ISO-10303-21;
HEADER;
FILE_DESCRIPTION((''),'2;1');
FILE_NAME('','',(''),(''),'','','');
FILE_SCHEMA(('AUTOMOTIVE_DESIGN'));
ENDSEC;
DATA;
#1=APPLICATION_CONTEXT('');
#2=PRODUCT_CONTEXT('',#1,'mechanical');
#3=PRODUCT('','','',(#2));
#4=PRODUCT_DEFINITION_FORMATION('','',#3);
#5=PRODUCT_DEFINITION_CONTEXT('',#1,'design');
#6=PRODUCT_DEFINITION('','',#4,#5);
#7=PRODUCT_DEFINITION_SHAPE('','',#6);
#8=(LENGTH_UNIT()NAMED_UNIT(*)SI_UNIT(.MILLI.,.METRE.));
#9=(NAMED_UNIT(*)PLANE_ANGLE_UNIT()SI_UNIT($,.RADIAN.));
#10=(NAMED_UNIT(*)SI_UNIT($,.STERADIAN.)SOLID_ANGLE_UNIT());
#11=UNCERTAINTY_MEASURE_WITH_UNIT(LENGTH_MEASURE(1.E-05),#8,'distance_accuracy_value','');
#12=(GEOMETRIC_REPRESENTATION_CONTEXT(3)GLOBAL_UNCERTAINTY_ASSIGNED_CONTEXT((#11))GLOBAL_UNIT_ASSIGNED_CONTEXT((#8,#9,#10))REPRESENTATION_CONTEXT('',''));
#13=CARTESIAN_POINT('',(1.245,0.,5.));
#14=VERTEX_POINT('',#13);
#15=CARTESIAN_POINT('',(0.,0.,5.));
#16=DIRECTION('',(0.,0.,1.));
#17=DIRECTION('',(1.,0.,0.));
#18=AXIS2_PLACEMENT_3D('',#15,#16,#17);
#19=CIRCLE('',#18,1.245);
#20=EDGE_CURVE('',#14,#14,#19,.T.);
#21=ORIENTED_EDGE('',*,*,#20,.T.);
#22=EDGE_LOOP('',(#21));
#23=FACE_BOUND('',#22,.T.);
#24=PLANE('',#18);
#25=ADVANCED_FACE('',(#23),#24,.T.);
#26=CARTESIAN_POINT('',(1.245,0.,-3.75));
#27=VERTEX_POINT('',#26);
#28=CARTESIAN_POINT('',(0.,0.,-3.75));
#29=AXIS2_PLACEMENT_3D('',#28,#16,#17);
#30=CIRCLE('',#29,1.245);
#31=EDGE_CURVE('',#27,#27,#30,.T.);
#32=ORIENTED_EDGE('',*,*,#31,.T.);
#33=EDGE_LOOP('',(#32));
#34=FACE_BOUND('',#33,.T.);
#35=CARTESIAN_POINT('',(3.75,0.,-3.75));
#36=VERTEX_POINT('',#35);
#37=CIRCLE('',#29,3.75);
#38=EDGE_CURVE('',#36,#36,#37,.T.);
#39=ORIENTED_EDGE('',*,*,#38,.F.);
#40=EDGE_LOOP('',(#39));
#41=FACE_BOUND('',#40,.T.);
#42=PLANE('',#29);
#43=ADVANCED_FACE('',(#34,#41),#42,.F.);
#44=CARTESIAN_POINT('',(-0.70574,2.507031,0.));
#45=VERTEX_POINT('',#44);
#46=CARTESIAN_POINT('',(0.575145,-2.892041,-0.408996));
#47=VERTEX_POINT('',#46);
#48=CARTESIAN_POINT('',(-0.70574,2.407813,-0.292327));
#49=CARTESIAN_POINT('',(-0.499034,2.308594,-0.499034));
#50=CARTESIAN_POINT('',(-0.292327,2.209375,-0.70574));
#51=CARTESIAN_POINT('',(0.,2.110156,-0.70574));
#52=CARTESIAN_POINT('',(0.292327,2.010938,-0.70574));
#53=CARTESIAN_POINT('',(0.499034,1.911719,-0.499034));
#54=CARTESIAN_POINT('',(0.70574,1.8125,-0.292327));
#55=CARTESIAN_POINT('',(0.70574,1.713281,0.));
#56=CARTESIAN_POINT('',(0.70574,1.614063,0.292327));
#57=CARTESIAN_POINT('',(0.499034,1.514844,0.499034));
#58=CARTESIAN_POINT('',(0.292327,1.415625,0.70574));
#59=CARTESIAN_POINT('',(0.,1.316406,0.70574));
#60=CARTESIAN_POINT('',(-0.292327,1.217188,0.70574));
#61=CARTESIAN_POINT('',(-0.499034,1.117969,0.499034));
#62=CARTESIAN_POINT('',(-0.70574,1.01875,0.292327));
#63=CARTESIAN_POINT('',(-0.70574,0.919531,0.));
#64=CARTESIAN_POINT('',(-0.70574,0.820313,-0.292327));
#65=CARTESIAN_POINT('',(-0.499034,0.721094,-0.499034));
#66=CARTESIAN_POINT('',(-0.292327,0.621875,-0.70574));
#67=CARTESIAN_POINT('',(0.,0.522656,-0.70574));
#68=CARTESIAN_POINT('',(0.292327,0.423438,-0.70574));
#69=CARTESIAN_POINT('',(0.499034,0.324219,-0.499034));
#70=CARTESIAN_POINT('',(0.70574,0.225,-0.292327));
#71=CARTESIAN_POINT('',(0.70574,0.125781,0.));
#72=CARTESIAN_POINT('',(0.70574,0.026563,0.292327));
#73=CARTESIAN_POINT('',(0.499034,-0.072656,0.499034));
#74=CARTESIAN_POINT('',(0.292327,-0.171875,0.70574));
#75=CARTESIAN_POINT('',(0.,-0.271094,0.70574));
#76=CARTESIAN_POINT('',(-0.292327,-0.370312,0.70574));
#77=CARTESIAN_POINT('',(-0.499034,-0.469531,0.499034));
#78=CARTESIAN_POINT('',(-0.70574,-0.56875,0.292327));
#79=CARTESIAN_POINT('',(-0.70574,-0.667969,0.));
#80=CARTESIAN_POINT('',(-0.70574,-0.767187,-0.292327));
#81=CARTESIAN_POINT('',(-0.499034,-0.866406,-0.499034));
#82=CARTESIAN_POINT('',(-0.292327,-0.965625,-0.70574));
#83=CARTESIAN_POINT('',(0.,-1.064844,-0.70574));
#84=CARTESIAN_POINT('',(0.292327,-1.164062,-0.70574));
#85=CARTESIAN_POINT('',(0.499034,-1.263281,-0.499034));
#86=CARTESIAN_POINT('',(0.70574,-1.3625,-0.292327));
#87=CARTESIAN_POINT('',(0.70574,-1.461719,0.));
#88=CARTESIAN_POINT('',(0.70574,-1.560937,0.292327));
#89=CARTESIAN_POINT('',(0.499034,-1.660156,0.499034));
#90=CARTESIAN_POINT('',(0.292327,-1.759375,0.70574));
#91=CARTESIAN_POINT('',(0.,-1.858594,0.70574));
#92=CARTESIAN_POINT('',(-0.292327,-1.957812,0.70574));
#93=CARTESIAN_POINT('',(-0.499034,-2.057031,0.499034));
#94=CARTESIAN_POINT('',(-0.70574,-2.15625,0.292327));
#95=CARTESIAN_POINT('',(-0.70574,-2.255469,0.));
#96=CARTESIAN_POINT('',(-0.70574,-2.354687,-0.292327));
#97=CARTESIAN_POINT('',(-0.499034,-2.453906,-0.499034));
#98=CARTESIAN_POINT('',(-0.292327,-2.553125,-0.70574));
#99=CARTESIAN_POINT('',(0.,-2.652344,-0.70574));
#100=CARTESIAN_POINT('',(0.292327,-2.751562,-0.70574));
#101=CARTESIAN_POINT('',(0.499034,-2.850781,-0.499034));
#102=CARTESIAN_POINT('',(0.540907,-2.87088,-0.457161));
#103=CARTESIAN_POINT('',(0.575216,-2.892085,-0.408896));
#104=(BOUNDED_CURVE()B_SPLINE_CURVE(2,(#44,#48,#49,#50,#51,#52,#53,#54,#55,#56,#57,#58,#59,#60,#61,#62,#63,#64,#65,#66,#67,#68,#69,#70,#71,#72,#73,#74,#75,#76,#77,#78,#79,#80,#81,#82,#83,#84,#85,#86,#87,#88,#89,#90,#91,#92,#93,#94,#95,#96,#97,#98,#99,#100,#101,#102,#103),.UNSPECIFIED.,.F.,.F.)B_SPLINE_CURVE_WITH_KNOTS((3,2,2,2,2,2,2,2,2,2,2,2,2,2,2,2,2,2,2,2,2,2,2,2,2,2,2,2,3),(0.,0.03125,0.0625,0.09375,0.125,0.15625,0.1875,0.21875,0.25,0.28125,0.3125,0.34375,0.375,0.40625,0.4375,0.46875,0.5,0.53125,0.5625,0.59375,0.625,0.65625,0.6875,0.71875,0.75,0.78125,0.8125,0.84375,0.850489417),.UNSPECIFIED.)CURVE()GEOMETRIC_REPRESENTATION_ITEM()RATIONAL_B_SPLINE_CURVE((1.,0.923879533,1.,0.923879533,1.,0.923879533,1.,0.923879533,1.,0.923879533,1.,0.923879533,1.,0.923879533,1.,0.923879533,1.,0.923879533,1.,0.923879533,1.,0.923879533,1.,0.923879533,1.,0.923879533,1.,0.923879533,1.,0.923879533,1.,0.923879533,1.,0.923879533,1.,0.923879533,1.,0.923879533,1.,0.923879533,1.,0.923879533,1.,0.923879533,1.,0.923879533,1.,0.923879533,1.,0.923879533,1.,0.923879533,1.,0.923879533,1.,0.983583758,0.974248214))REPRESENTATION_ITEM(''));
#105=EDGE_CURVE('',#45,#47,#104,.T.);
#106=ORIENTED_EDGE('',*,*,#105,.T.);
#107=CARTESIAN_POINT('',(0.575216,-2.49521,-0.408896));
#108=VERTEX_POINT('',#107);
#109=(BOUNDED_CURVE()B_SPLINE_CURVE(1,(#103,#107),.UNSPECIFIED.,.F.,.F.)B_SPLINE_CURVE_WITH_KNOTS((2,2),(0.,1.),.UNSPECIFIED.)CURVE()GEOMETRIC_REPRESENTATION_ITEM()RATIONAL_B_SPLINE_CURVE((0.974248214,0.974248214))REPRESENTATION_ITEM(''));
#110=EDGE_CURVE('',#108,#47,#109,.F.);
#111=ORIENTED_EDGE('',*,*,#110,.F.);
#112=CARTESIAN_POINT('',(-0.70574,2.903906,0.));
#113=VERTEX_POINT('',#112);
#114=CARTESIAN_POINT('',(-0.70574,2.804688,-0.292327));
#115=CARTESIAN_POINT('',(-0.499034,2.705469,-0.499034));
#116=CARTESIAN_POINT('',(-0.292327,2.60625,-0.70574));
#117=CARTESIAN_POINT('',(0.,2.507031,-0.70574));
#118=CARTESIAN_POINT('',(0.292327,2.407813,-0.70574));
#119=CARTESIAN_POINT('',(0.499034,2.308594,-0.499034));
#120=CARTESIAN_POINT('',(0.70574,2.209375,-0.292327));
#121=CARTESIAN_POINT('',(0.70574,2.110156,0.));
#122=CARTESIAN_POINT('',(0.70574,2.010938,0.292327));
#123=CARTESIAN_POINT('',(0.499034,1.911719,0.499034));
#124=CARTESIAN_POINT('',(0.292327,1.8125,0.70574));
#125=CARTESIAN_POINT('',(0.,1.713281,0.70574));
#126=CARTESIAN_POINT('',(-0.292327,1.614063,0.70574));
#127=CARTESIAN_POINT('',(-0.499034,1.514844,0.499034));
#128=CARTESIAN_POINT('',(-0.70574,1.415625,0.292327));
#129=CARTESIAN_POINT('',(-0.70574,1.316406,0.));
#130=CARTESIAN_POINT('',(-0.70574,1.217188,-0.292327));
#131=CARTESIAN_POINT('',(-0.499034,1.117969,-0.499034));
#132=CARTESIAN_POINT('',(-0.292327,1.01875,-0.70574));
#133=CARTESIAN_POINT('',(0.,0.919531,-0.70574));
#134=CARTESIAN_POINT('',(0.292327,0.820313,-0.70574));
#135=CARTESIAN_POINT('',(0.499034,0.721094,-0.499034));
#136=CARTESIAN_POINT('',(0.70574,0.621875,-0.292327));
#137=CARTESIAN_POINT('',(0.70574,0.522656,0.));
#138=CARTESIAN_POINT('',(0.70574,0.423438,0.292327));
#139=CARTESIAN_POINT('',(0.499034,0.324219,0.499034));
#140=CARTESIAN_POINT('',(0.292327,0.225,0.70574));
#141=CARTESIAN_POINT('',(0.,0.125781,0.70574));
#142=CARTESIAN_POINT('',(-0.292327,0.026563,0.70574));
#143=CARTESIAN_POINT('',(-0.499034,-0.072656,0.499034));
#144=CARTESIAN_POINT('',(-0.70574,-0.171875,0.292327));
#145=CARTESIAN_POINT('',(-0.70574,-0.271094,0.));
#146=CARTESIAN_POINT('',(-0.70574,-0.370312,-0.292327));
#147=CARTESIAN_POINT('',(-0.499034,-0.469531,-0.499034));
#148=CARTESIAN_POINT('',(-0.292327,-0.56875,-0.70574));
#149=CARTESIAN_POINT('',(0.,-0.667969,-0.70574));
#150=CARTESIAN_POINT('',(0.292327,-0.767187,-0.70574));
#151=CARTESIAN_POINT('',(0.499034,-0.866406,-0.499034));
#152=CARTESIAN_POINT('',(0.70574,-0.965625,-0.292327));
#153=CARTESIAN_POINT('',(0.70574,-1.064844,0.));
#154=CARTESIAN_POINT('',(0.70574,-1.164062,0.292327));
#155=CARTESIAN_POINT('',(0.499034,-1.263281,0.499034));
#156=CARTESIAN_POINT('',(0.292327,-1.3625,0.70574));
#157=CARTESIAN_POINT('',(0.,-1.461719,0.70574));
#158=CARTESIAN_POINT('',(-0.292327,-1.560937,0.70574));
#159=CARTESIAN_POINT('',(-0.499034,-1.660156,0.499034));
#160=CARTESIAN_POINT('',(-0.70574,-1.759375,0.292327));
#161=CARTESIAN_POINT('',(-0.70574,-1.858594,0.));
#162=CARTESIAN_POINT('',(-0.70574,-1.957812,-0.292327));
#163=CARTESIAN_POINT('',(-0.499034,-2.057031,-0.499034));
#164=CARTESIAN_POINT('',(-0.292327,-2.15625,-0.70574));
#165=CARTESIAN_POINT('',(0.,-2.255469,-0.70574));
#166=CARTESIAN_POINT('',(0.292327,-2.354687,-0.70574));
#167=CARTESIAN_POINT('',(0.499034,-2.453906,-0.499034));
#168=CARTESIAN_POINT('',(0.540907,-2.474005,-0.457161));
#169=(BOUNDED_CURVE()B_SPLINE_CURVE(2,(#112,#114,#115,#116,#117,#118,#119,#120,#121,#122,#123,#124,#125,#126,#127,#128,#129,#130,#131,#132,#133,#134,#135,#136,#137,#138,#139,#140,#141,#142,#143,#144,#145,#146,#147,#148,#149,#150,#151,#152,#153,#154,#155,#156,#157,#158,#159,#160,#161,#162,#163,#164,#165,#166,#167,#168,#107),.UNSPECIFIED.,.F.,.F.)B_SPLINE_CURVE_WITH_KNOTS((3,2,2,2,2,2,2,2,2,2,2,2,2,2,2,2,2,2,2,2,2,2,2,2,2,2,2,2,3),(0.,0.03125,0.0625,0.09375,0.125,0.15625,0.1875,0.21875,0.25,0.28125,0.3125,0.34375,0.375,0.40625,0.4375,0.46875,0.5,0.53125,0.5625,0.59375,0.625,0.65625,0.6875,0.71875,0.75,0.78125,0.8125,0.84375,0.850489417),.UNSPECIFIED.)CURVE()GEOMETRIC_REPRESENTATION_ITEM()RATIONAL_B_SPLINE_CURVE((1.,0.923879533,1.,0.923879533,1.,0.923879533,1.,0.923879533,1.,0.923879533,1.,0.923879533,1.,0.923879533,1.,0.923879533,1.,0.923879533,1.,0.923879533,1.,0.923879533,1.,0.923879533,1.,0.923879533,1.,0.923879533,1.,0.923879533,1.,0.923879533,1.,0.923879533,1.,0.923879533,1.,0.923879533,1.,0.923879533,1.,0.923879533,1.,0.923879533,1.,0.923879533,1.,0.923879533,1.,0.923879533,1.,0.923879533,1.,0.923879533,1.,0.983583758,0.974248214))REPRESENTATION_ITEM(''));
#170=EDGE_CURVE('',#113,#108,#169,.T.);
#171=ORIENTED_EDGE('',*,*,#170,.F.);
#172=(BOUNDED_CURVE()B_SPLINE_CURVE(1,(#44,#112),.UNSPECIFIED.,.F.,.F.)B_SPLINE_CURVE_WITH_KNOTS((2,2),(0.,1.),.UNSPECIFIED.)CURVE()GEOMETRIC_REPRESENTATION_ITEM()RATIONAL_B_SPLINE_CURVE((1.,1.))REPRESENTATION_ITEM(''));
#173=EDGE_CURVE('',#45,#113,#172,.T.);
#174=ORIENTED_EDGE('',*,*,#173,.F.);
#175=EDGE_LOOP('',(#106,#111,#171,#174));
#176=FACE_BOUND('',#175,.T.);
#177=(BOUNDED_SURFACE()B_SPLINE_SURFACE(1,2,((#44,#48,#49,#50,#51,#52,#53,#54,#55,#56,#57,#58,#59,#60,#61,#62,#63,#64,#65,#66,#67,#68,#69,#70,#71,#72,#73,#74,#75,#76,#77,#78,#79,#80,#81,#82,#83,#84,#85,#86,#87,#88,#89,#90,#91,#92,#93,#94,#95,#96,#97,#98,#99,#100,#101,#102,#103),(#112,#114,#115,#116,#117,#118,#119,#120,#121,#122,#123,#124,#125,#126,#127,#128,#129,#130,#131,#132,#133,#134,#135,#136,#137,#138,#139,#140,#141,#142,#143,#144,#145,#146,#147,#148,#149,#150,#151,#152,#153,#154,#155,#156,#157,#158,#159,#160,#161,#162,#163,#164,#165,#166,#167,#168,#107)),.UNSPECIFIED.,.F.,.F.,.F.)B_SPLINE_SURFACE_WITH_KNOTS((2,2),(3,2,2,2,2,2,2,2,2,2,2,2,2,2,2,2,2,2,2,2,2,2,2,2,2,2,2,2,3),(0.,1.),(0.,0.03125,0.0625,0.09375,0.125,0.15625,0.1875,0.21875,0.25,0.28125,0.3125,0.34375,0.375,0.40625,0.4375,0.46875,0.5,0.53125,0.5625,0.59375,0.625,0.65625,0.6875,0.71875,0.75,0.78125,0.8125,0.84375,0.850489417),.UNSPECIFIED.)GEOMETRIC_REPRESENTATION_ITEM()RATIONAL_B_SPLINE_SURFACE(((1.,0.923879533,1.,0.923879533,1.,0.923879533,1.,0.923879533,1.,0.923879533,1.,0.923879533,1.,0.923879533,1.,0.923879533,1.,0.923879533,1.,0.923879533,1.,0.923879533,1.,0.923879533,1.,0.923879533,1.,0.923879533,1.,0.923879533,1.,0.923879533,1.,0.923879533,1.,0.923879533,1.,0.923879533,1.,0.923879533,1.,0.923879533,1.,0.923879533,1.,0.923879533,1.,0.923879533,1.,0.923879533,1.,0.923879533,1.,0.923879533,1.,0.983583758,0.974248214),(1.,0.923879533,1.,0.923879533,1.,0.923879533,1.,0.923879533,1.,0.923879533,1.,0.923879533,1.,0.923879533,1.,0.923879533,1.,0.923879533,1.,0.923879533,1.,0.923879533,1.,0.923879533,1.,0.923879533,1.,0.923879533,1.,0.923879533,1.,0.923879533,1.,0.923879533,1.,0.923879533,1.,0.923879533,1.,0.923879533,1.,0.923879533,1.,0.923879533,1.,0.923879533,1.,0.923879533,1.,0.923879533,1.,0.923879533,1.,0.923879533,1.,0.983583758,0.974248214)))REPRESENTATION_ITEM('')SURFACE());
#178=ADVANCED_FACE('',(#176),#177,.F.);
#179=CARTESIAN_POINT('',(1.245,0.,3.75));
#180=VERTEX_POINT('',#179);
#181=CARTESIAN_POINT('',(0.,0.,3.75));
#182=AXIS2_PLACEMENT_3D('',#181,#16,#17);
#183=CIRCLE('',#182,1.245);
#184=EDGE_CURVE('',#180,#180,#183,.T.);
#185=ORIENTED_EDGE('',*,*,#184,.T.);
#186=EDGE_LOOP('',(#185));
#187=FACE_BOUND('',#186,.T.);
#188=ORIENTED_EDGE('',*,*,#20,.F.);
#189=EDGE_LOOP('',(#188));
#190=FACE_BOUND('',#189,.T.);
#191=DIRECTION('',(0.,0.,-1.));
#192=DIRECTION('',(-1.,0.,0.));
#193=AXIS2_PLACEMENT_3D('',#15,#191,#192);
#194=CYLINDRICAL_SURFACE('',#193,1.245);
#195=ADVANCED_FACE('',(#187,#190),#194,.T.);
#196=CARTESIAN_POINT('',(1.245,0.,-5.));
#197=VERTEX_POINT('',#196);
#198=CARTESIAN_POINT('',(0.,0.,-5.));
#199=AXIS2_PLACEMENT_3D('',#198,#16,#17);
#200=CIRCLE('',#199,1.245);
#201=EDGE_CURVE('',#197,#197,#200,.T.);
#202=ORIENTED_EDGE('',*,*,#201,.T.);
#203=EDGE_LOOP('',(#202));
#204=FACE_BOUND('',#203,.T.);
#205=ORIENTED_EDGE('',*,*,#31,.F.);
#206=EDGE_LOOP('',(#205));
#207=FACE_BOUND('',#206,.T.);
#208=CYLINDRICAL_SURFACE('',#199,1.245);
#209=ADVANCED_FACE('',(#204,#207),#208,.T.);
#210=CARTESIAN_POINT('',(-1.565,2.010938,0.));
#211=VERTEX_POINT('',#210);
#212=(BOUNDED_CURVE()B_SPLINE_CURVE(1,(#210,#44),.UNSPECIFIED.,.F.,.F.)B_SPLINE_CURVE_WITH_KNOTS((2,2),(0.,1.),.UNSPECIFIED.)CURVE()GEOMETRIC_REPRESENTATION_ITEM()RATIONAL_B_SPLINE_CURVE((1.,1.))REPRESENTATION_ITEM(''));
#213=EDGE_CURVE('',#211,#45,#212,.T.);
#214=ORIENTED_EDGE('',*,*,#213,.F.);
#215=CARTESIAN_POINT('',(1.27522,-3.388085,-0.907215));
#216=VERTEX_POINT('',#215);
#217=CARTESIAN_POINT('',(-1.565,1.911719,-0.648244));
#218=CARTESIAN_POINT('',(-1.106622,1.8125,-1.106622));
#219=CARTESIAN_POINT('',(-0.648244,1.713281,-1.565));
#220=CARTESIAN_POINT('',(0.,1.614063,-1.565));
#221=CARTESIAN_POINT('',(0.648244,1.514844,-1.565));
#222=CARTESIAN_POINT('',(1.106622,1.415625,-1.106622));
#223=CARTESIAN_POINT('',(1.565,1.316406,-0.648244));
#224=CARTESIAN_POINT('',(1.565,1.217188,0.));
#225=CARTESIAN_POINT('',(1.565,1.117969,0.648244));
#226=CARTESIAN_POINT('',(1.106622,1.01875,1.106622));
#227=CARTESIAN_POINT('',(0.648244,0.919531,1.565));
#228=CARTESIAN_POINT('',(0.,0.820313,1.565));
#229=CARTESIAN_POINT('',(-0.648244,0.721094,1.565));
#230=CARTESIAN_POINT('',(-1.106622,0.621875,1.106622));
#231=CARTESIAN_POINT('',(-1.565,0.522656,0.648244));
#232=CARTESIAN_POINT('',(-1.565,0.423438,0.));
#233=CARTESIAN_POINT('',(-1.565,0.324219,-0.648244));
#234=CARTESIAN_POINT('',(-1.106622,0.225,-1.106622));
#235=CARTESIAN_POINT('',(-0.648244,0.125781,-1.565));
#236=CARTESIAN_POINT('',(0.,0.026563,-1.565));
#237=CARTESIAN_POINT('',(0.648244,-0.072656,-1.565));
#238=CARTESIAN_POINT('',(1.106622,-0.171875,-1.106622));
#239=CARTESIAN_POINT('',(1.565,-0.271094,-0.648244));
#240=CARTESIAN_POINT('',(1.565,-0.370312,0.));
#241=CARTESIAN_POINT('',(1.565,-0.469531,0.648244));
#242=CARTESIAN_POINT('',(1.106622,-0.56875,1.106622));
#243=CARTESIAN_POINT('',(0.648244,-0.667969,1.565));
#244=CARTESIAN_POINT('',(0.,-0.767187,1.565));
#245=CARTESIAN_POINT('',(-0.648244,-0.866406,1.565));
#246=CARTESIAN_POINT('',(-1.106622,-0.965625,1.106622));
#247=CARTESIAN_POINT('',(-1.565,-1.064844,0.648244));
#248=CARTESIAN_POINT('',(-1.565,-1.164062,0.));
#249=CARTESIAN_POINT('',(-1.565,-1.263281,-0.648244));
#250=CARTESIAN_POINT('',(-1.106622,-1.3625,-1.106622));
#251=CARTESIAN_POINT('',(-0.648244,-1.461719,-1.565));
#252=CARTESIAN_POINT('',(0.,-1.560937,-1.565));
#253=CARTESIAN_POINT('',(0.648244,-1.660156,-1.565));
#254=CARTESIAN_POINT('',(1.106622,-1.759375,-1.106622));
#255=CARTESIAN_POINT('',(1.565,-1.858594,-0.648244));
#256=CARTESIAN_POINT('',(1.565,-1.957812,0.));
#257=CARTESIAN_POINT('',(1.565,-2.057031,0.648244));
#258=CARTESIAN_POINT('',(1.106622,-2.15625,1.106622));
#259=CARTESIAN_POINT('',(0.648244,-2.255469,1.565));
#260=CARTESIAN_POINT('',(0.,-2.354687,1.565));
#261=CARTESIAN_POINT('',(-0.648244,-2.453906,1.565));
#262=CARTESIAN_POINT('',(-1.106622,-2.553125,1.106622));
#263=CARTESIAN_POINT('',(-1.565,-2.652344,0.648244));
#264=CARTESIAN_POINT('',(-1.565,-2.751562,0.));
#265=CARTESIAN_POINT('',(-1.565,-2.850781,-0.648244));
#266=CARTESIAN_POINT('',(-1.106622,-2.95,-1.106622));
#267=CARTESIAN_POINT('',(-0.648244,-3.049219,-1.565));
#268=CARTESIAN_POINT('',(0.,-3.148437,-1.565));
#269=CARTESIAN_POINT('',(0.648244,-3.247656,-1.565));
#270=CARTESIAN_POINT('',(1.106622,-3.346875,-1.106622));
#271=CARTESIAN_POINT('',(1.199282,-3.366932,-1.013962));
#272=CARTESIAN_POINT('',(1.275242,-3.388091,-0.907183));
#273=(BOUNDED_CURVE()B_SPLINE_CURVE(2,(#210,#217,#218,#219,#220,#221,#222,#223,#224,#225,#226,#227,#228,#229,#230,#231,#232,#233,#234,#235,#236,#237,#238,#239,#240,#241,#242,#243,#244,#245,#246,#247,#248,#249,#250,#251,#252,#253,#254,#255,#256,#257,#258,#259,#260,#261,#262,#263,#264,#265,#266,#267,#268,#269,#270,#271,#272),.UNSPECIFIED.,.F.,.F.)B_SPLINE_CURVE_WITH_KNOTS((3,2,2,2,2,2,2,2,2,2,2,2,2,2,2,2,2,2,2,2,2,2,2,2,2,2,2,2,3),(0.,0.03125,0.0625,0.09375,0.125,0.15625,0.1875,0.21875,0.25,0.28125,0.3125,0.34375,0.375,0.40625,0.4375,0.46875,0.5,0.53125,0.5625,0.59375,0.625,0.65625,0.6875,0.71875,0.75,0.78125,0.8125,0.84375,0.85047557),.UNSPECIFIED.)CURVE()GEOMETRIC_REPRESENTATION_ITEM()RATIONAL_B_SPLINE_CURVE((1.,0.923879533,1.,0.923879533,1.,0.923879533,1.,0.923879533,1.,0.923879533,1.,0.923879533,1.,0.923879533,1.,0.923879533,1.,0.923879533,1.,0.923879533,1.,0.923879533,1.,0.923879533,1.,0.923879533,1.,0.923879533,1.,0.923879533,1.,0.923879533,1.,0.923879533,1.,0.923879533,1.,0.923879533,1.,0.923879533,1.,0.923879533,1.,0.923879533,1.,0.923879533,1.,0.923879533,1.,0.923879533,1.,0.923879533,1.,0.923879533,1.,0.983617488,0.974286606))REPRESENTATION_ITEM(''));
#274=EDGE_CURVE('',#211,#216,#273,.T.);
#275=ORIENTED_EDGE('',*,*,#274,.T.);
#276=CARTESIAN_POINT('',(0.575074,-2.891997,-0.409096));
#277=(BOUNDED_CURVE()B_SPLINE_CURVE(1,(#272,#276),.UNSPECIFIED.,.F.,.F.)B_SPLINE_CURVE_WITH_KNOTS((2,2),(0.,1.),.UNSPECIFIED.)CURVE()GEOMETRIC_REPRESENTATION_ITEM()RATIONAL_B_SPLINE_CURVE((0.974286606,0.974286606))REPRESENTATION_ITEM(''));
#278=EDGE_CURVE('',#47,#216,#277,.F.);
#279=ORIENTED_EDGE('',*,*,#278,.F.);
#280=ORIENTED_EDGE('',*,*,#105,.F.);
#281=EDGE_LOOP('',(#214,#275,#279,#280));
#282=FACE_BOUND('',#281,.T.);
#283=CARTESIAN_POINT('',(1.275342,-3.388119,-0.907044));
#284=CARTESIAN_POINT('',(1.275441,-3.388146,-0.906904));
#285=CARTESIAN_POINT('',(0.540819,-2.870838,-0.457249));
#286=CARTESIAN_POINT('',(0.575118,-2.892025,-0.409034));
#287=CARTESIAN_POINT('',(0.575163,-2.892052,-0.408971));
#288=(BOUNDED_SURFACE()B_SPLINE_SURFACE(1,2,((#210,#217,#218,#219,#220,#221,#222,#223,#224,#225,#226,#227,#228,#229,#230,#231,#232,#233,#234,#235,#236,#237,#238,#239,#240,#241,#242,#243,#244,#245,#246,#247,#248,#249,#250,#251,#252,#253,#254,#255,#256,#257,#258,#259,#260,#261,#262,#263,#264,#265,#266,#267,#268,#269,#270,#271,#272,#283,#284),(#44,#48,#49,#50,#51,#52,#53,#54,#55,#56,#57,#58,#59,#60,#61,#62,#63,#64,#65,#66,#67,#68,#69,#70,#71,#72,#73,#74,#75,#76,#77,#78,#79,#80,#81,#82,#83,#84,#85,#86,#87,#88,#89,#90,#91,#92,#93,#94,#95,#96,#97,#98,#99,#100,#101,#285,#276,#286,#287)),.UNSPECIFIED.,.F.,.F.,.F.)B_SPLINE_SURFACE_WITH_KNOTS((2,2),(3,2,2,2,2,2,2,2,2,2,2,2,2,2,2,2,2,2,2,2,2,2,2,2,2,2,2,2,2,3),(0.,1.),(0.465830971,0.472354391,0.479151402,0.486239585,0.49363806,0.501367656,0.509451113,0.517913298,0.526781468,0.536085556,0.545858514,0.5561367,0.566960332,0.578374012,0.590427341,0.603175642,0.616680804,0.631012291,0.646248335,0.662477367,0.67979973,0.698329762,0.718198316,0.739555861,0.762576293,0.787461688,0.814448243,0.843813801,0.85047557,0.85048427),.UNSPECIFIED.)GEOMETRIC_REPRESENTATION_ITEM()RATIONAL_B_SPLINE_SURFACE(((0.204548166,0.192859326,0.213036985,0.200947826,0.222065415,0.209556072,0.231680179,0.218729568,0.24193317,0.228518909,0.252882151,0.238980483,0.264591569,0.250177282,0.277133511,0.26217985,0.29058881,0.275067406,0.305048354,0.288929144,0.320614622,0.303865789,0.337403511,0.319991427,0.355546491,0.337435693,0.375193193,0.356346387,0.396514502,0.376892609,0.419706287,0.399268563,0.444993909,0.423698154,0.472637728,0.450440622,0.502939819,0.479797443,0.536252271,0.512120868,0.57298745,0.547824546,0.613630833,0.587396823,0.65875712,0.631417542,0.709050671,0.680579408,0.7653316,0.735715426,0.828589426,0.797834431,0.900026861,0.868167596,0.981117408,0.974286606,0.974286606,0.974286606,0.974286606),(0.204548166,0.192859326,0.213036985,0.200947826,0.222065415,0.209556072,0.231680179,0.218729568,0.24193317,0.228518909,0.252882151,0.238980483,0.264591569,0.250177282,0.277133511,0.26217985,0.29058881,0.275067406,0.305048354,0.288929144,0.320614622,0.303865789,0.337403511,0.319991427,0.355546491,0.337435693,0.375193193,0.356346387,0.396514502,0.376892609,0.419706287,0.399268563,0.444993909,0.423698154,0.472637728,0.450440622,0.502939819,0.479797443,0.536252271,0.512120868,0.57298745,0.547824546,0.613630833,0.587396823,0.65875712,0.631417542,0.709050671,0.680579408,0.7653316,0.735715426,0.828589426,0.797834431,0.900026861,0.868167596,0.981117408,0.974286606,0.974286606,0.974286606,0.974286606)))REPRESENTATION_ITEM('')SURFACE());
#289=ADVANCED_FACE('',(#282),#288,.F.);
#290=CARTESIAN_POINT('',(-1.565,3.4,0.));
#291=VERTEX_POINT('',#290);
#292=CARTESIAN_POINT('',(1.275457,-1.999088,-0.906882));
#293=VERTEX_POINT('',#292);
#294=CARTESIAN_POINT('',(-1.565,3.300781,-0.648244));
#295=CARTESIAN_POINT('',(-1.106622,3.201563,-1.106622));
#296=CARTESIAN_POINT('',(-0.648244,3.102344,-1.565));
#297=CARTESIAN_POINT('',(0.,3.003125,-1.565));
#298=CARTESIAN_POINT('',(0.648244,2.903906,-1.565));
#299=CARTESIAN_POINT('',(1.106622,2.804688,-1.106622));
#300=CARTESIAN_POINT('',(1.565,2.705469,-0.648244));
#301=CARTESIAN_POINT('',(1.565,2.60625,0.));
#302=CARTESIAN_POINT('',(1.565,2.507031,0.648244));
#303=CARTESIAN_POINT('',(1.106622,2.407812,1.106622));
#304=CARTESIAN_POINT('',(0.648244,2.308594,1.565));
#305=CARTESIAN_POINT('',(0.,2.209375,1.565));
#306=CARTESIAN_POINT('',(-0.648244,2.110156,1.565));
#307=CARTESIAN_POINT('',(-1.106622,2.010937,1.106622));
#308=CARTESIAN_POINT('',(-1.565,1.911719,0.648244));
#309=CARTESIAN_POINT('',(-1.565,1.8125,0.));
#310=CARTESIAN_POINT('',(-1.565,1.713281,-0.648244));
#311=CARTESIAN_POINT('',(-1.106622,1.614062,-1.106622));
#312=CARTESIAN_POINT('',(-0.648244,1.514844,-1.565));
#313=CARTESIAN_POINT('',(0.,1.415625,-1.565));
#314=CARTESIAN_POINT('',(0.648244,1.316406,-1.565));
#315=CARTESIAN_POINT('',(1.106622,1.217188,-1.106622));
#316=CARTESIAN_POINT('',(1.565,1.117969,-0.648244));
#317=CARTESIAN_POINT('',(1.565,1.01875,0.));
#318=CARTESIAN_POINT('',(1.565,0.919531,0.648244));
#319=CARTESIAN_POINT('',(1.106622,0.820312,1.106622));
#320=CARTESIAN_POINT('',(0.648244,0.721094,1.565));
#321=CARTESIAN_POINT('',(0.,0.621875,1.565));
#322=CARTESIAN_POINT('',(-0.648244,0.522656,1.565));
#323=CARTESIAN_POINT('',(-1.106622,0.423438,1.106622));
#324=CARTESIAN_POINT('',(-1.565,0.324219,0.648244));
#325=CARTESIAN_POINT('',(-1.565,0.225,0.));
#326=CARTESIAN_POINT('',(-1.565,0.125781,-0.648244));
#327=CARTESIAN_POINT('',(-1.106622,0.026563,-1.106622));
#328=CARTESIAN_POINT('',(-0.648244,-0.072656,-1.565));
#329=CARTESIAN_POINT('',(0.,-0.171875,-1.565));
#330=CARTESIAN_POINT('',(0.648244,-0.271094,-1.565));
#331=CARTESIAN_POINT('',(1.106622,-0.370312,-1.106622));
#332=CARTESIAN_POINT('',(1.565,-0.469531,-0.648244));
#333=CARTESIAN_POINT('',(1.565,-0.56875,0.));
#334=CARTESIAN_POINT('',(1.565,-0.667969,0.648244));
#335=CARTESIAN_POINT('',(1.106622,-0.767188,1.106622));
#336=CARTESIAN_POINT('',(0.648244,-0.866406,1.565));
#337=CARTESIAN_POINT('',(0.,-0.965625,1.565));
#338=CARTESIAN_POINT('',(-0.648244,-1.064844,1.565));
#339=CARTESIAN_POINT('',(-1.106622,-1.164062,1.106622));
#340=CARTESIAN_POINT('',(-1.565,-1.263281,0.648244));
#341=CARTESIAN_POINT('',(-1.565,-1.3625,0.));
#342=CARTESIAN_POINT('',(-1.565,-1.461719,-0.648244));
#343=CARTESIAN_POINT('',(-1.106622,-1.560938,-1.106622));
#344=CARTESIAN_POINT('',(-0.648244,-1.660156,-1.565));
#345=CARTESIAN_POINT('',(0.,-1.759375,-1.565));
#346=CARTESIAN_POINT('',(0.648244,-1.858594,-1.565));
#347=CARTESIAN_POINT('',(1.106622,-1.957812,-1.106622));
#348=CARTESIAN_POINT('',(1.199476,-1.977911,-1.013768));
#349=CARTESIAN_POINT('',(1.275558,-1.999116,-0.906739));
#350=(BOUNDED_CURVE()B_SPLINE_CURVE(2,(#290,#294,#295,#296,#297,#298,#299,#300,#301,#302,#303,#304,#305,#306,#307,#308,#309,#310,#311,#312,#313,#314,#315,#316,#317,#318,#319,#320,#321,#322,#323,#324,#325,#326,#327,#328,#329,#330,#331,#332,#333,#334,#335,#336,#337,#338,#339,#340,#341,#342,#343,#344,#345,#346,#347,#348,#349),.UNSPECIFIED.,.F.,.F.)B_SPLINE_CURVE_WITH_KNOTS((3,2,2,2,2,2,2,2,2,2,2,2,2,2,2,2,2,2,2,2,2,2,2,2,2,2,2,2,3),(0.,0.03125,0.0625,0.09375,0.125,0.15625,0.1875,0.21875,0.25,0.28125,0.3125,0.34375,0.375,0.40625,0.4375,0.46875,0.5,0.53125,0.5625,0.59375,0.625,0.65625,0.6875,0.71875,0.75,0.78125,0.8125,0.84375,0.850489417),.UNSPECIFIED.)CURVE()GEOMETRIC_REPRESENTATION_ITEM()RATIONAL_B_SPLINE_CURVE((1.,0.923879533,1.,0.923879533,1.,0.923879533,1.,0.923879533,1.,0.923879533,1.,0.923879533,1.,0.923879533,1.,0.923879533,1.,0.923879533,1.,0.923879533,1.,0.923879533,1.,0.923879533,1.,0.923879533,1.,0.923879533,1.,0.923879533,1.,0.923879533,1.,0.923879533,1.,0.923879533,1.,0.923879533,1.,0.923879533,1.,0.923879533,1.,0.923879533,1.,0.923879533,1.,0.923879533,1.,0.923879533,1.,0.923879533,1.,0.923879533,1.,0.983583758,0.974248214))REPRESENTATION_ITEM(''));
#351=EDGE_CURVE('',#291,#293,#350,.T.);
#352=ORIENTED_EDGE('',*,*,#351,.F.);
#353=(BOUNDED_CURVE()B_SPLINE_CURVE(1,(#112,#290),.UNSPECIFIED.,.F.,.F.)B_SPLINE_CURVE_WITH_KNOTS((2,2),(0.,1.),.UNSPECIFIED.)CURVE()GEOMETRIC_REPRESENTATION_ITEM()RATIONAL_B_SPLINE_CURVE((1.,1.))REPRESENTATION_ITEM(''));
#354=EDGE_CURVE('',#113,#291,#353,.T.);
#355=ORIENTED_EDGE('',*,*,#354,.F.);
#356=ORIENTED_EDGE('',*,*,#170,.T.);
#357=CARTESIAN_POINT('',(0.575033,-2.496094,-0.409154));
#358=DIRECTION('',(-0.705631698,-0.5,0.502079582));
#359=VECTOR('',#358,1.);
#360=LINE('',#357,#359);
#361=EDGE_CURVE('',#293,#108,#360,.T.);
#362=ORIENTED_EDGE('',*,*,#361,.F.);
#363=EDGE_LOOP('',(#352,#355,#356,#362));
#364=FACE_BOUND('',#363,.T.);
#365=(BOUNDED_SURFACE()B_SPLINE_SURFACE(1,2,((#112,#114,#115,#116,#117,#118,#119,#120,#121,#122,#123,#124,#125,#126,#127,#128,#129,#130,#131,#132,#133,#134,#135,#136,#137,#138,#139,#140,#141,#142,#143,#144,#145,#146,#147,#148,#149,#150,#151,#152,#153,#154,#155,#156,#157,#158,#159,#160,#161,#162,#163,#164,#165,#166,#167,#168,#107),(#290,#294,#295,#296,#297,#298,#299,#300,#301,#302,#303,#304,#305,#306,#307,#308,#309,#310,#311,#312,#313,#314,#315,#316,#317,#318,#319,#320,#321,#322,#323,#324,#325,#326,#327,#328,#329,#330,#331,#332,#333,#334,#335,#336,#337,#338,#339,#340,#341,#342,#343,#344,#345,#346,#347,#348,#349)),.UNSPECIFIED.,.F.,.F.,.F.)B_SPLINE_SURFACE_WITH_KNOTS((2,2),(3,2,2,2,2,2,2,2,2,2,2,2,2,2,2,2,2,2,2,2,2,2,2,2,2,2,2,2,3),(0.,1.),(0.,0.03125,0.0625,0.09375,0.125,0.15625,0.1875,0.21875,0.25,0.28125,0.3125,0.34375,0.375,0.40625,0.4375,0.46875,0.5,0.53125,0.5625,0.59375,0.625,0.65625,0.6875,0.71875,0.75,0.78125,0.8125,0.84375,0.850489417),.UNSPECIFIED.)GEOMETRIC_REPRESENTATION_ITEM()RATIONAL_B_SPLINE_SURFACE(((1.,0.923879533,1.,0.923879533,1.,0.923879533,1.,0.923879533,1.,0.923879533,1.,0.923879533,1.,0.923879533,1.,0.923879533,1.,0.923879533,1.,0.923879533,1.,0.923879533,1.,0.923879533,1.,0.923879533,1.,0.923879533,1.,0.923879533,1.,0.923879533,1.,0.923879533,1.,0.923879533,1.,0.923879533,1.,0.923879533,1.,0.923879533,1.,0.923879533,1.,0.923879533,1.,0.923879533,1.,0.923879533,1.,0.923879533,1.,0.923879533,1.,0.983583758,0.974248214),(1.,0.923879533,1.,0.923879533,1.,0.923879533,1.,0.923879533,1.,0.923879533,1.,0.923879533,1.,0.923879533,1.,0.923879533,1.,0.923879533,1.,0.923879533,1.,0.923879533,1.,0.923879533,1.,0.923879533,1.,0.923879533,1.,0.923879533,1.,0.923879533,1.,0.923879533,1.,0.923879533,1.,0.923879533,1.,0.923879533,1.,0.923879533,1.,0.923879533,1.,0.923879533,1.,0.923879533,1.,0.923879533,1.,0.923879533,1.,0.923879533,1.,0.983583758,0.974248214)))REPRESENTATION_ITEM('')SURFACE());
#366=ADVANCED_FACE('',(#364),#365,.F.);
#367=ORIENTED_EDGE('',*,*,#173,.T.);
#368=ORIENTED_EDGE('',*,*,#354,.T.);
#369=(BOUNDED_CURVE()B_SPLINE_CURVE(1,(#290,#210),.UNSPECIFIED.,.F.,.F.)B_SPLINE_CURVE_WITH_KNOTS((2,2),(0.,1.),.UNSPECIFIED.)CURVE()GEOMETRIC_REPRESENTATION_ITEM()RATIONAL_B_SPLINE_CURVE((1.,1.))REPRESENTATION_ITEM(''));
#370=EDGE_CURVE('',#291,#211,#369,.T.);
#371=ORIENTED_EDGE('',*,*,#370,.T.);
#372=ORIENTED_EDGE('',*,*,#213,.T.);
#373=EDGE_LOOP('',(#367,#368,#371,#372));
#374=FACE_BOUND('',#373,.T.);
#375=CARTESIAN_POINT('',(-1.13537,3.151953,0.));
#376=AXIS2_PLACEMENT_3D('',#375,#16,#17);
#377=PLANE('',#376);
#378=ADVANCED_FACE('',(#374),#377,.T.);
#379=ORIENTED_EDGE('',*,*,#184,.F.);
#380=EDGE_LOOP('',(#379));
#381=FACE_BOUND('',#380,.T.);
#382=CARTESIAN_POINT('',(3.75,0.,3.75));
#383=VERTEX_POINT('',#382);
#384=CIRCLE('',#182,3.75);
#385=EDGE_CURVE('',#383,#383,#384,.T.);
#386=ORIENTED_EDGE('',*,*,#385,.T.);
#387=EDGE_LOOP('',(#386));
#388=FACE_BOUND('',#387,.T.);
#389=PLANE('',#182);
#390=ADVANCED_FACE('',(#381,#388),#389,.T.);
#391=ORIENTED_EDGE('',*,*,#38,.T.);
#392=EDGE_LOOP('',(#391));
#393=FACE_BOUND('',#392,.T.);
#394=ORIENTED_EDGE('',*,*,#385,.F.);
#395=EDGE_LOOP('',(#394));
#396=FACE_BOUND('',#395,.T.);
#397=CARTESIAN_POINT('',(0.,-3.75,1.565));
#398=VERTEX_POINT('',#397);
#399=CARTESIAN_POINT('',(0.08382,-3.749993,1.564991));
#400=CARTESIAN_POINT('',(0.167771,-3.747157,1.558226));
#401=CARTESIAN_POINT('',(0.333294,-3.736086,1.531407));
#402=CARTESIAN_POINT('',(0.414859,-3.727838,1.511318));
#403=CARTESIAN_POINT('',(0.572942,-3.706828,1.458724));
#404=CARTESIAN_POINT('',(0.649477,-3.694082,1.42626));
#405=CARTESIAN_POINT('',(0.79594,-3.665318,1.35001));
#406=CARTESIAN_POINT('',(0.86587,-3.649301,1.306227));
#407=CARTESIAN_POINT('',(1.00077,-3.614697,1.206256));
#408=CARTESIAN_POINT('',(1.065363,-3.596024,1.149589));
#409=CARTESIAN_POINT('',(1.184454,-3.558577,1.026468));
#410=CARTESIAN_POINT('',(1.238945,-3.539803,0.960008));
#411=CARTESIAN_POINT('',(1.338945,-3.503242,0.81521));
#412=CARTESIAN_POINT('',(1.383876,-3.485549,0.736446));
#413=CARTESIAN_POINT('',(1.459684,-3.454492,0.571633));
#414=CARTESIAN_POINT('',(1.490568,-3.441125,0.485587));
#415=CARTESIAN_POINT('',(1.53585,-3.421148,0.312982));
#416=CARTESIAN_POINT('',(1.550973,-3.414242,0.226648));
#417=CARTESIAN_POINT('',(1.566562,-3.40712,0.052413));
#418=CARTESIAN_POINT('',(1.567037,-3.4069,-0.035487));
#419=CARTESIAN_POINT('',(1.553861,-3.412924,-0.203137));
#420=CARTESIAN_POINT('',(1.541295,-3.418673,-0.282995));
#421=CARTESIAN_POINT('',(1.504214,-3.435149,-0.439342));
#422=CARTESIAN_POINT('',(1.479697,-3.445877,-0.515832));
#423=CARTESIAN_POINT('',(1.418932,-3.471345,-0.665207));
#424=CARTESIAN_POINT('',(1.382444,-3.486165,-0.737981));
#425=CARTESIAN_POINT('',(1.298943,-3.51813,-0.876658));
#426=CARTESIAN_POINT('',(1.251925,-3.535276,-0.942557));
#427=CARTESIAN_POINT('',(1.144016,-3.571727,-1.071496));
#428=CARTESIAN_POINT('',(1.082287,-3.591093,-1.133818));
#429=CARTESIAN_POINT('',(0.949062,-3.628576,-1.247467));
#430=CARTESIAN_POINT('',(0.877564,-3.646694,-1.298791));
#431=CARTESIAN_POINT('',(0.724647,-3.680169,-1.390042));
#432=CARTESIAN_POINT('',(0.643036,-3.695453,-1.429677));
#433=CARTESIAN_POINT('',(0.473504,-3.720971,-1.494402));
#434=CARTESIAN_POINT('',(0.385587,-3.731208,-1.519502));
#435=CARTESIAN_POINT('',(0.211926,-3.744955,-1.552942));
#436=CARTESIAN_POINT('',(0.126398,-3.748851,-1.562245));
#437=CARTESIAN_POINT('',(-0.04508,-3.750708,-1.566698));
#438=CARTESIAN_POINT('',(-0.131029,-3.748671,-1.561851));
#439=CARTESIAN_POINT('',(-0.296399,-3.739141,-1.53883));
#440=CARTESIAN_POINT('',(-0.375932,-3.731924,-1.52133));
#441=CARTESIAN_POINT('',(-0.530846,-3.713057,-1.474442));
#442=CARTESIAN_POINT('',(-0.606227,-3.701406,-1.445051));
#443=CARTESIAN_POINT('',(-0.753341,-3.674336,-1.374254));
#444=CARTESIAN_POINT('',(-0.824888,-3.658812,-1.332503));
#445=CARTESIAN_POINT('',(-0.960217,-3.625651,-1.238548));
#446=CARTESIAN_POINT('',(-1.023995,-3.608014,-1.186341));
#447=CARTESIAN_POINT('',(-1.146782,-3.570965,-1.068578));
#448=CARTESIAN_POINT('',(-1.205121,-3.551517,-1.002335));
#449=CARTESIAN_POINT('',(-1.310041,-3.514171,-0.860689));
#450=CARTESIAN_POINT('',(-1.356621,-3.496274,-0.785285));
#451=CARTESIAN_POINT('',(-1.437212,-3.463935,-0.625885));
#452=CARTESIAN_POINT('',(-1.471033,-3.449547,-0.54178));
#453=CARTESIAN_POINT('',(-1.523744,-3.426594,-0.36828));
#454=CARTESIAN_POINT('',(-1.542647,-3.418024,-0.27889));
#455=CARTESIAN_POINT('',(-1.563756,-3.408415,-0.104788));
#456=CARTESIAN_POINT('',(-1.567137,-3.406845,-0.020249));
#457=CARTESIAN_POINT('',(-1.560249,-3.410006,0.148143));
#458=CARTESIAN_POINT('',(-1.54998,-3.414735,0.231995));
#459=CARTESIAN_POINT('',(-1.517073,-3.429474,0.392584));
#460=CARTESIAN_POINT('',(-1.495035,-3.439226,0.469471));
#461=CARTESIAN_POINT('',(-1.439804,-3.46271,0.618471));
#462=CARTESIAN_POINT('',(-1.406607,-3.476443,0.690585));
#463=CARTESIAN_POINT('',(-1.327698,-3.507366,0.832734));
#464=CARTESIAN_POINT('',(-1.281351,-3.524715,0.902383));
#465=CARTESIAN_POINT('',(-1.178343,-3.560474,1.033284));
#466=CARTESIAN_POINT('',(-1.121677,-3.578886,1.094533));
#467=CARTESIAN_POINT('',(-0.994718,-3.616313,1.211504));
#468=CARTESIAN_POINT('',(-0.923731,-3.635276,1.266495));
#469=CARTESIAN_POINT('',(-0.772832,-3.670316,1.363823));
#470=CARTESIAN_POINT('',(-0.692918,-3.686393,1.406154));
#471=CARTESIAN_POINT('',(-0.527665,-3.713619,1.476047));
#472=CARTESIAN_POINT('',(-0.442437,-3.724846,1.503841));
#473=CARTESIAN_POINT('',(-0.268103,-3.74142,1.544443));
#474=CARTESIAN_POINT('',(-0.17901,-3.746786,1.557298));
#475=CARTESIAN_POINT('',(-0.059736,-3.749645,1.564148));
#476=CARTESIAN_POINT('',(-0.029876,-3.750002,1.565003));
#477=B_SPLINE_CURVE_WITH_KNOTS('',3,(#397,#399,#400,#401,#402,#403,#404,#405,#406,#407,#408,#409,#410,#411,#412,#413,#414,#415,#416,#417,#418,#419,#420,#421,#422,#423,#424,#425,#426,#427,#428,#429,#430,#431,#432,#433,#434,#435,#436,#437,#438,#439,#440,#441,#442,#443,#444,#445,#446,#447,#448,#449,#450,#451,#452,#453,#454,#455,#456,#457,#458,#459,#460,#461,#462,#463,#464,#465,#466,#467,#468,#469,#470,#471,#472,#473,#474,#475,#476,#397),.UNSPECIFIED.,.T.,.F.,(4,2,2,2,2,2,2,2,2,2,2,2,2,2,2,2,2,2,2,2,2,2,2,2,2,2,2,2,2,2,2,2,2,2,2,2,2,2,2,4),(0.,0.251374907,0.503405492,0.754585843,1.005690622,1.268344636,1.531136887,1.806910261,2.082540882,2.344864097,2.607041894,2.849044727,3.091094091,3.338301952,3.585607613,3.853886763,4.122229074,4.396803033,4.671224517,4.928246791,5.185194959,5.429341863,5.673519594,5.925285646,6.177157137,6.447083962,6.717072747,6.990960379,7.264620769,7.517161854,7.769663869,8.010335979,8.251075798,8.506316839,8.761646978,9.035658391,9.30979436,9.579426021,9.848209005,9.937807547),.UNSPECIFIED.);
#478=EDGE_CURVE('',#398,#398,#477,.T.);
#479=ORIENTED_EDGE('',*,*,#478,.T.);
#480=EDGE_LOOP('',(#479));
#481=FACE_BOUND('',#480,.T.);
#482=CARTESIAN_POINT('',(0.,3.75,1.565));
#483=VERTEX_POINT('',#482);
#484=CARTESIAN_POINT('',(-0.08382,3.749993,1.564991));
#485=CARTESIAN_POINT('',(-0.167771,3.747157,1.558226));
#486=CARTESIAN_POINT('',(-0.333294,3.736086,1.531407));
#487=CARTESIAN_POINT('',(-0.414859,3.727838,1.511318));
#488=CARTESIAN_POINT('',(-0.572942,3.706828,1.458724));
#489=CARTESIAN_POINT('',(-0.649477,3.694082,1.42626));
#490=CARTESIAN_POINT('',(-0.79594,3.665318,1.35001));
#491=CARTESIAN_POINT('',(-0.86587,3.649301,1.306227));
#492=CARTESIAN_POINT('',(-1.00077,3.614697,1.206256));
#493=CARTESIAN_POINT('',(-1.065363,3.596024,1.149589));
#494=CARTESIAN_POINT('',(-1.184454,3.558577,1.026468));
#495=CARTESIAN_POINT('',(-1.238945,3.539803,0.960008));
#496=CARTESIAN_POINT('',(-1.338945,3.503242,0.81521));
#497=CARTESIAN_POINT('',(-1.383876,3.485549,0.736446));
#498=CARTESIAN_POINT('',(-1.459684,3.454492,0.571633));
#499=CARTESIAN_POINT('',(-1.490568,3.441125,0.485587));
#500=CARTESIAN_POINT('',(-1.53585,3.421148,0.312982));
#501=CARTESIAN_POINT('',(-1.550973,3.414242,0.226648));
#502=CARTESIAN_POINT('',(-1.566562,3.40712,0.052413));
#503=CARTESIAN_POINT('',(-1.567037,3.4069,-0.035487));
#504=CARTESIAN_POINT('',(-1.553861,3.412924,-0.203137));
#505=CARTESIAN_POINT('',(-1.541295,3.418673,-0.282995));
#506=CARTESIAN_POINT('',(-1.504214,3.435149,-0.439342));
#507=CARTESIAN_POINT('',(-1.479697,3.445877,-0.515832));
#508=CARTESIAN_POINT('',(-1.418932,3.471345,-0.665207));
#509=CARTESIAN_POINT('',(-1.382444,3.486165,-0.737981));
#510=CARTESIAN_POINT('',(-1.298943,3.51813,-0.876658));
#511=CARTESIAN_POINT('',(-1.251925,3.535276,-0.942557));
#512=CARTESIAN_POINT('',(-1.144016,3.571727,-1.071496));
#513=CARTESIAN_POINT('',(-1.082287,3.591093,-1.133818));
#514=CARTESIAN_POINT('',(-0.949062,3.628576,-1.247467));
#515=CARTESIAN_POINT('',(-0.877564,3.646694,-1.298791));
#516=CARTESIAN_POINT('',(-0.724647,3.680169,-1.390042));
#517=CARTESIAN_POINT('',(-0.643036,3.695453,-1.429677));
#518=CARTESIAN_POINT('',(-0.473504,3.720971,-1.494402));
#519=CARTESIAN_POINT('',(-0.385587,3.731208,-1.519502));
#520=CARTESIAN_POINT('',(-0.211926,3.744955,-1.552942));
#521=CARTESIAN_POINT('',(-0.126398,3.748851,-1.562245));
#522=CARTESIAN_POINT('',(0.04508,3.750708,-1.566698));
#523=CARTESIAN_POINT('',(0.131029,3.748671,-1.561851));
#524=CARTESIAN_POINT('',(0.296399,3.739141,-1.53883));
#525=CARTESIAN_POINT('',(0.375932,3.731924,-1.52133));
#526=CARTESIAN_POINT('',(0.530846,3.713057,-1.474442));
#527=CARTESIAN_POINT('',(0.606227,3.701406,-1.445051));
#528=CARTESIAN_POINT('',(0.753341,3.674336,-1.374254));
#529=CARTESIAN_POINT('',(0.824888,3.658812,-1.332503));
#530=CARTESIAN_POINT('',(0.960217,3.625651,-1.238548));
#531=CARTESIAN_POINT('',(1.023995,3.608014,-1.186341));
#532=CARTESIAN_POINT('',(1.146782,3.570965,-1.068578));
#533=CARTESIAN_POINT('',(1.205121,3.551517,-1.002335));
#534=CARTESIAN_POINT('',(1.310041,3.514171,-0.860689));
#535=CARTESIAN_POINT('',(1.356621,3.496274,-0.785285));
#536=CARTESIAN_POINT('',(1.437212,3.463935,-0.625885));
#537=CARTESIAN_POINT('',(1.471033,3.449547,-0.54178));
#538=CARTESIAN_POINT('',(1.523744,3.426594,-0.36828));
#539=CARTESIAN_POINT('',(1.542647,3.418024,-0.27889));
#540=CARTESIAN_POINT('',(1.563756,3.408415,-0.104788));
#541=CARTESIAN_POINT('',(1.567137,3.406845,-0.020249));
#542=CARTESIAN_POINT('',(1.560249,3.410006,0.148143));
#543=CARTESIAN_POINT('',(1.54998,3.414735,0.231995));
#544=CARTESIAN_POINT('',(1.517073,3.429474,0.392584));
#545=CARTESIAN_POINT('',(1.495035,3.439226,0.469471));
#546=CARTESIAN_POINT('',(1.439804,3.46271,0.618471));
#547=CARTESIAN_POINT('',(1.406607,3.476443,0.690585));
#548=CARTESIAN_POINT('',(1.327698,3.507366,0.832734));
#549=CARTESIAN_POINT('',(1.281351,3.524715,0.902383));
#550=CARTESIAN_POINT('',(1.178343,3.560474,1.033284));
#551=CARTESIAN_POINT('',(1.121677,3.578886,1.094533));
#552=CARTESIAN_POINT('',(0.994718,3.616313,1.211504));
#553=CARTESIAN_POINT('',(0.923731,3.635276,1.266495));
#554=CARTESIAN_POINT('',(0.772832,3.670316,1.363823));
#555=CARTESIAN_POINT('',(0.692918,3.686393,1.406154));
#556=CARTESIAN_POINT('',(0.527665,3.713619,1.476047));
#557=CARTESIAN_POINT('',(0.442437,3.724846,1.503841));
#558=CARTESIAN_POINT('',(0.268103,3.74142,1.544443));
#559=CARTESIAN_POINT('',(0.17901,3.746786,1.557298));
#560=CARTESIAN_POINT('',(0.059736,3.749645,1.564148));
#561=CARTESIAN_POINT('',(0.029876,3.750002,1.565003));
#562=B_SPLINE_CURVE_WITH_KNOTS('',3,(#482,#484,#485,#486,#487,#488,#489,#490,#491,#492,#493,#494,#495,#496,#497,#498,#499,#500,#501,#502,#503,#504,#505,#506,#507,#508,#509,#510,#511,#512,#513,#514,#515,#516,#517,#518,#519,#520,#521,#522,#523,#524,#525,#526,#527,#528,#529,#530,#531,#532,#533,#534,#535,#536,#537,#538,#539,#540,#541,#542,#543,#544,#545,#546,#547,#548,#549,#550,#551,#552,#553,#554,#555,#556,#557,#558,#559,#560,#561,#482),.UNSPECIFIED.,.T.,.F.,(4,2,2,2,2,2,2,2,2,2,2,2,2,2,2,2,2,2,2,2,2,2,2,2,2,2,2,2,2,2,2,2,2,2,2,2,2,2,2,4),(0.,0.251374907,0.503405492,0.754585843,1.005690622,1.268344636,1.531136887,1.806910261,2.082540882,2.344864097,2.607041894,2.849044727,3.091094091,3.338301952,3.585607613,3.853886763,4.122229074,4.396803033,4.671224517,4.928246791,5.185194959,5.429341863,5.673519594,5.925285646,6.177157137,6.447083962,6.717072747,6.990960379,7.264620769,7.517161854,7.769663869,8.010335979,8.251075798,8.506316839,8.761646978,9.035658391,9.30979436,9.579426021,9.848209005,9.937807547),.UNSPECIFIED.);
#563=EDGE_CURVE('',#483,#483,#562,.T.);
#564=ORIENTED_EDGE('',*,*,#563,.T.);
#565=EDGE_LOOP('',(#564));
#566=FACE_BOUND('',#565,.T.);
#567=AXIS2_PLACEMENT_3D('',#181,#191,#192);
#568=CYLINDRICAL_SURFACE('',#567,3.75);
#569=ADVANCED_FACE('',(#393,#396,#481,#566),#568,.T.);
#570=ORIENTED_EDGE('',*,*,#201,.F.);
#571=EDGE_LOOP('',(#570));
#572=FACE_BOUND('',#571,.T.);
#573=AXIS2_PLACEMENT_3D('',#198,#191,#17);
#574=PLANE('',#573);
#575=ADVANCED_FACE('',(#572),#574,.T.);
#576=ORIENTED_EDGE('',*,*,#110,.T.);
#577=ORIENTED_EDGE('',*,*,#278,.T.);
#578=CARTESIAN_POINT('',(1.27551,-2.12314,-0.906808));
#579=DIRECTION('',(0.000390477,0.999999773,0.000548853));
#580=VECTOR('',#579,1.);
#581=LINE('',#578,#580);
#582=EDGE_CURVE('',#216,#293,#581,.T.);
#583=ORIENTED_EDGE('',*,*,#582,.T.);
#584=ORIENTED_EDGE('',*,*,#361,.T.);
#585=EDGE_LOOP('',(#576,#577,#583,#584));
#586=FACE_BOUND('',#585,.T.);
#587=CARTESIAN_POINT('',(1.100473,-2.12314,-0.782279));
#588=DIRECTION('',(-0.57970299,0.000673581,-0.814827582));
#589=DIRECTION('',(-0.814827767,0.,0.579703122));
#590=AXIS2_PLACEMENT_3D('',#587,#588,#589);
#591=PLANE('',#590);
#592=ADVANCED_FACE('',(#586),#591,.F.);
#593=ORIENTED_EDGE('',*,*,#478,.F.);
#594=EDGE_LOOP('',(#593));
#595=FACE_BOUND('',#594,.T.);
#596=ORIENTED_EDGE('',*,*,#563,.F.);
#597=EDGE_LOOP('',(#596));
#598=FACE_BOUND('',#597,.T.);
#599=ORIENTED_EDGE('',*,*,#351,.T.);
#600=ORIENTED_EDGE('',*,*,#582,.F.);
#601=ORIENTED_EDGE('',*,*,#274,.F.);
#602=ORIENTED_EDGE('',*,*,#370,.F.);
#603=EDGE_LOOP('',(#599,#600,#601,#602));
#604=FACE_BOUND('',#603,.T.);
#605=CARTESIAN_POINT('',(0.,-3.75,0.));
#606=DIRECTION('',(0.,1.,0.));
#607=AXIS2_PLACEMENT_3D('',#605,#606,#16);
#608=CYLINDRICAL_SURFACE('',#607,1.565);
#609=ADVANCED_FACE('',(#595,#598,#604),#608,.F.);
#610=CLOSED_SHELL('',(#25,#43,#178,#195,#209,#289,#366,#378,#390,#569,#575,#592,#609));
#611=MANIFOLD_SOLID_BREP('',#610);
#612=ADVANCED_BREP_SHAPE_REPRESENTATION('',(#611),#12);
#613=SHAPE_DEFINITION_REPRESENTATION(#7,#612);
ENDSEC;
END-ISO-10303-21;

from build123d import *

# Parameters (mm, degrees)
SKETCH2_R               = 3.75
BOSS_EXTRUDE1_DEPTH     = 3.75
SKETCH3_R               = 1.245
BOSS_EXTRUDE3_DEPTH     = 1.25
CUT_EXTRUDE2_DEPTH      = 8.288689869
CUT_EXTRUDE2_DEPTH_BACK = 8.288689869
SKETCH4_R               = 1.565
THREAD2_PITCH           = 1.5875


with BuildPart() as part:
    # Sketch2 → Boss-Extrude1 (new, symmetric)
    with BuildSketch(Plane.XY):
        Circle(SKETCH2_R)
    extrude(amount=BOSS_EXTRUDE1_DEPTH, both=True)

    # Sketch3 → Boss-Extrude3 (add)
    with BuildSketch(Plane.XY.offset(3.75)):
        Circle(SKETCH3_R)
    boss_extrude3 = extrude(amount=BOSS_EXTRUDE3_DEPTH)

    # Mirror1: Boss-Extrude3 across plane
    add(boss_extrude3.mirror(Plane.XY))

    # Sketch4 → Cut-Extrude2 (cut, two sides: drawn at the far end of the back side and taken through both)
    with BuildSketch(Plane(origin=(0, 0, 0), x_dir=(1, 0, 0), z_dir=(0, 1, 0)).offset(-CUT_EXTRUDE2_DEPTH_BACK)):
        with Locations(Location((0, 0, 0), (0, 0, 270))):
            Circle(SKETCH4_R)
    extrude(amount=CUT_EXTRUDE2_DEPTH + CUT_EXTRUDE2_DEPTH_BACK, mode=Mode.SUBTRACT)

    # Thread2: the profile of Thread Profile3 profile screwed along a right-hand helix of 3.401575 turns, 8 arcs to a turn; built about Z, then put on its axis
    thread2_z = Axis((0, 0, 0), (0, 0, 1))
    thread2_corners = [(1.5653, 0, -0.000173205), (1.5653, 0, 1.389235701), (0.705740423, 0, 0.892968748), (0.705740423, 0, 0.496093748)]
    with BuildLine(mode=Mode.PRIVATE) as thread2_profile:
        Line(thread2_corners[0], thread2_corners[1])
        Line(thread2_corners[1], thread2_corners[2])
        Line(thread2_corners[2], thread2_corners[3])
        Line(thread2_corners[3], thread2_corners[0])
    thread2_cap = Face(thread2_profile.wire())
    thread2_turn_angles = [0, 22.5, 45, 67.5, 90, 112.5, 135, 157.5, 180, 202.5, 225, 247.5, 270, 292.5, 315, 337.5, 360]
    thread2_turn_weights = [1, 0.9238795325112867, 1, 0.9238795325112867, 1, 0.9238795325112867, 1, 0.9238795325112867, 1, 0.9238795325112867, 1, 0.9238795325112867, 1, 0.9238795325112867, 1, 0.9238795325112867, 1]
    thread2_turn_rails = [Edge.make_bspline([Vector(p[0], p[1], 0).rotate(thread2_z, thread2_turn_angles[k]) / thread2_turn_weights[k] + Vector(0, 0, p[2] + THREAD2_PITCH * thread2_turn_angles[k] / 360) for k in range(17)], [0, 0, 0, 1, 1, 2, 2, 3, 3, 4, 4, 5, 5, 6, 6, 7, 7, 8, 8, 8], 2, thread2_turn_weights) for p in thread2_corners]
    thread2_turn_sides = [Face.make_surface_from_curves(thread2_turn_rails[p[0]], thread2_turn_rails[p[1]]) for p in [(0, 1), (1, 2), (2, 3), (3, 0)]]
    thread2_last_angles = [1080, 1102.5, 1125, 1147.5, 1170, 1192.5, 1215, 1219.783464567, 1224.566929134]
    thread2_last_weights = [1, 0.9238795325112867, 1, 0.9238795325112867, 1, 0.9238795325112867, 1, 0.9965169669882292, 1]
    thread2_last_rails = [Edge.make_bspline([Vector(p[0], p[1], 0).rotate(thread2_z, thread2_last_angles[k]) / thread2_last_weights[k] + Vector(0, 0, p[2] + THREAD2_PITCH * thread2_last_angles[k] / 360) for k in range(9)], [0, 0, 0, 1, 1, 2, 2, 3, 3, 4, 4, 4], 2, thread2_last_weights) for p in thread2_corners]
    thread2_last_sides = [Face.make_surface_from_curves(thread2_last_rails[p[0]], thread2_last_rails[p[1]]) for p in [(0, 1), (1, 2), (2, 3), (3, 0)]]
    thread2 = Plane(origin=(0, 3.4, 0), x_dir=(-1, 0, 0), z_dir=(0, -1, 0)) * Solid(Shell([*[p.moved(Location((0, 0, THREAD2_PITCH * i))) for i in range(3) for p in thread2_turn_sides], *thread2_last_sides, thread2_cap, thread2_cap.rotate(thread2_z, 1224.566929134).moved(Location((0, 0, THREAD2_PITCH * 1224.566929134 / 360)))]))
    add(thread2)


solid = part.part
